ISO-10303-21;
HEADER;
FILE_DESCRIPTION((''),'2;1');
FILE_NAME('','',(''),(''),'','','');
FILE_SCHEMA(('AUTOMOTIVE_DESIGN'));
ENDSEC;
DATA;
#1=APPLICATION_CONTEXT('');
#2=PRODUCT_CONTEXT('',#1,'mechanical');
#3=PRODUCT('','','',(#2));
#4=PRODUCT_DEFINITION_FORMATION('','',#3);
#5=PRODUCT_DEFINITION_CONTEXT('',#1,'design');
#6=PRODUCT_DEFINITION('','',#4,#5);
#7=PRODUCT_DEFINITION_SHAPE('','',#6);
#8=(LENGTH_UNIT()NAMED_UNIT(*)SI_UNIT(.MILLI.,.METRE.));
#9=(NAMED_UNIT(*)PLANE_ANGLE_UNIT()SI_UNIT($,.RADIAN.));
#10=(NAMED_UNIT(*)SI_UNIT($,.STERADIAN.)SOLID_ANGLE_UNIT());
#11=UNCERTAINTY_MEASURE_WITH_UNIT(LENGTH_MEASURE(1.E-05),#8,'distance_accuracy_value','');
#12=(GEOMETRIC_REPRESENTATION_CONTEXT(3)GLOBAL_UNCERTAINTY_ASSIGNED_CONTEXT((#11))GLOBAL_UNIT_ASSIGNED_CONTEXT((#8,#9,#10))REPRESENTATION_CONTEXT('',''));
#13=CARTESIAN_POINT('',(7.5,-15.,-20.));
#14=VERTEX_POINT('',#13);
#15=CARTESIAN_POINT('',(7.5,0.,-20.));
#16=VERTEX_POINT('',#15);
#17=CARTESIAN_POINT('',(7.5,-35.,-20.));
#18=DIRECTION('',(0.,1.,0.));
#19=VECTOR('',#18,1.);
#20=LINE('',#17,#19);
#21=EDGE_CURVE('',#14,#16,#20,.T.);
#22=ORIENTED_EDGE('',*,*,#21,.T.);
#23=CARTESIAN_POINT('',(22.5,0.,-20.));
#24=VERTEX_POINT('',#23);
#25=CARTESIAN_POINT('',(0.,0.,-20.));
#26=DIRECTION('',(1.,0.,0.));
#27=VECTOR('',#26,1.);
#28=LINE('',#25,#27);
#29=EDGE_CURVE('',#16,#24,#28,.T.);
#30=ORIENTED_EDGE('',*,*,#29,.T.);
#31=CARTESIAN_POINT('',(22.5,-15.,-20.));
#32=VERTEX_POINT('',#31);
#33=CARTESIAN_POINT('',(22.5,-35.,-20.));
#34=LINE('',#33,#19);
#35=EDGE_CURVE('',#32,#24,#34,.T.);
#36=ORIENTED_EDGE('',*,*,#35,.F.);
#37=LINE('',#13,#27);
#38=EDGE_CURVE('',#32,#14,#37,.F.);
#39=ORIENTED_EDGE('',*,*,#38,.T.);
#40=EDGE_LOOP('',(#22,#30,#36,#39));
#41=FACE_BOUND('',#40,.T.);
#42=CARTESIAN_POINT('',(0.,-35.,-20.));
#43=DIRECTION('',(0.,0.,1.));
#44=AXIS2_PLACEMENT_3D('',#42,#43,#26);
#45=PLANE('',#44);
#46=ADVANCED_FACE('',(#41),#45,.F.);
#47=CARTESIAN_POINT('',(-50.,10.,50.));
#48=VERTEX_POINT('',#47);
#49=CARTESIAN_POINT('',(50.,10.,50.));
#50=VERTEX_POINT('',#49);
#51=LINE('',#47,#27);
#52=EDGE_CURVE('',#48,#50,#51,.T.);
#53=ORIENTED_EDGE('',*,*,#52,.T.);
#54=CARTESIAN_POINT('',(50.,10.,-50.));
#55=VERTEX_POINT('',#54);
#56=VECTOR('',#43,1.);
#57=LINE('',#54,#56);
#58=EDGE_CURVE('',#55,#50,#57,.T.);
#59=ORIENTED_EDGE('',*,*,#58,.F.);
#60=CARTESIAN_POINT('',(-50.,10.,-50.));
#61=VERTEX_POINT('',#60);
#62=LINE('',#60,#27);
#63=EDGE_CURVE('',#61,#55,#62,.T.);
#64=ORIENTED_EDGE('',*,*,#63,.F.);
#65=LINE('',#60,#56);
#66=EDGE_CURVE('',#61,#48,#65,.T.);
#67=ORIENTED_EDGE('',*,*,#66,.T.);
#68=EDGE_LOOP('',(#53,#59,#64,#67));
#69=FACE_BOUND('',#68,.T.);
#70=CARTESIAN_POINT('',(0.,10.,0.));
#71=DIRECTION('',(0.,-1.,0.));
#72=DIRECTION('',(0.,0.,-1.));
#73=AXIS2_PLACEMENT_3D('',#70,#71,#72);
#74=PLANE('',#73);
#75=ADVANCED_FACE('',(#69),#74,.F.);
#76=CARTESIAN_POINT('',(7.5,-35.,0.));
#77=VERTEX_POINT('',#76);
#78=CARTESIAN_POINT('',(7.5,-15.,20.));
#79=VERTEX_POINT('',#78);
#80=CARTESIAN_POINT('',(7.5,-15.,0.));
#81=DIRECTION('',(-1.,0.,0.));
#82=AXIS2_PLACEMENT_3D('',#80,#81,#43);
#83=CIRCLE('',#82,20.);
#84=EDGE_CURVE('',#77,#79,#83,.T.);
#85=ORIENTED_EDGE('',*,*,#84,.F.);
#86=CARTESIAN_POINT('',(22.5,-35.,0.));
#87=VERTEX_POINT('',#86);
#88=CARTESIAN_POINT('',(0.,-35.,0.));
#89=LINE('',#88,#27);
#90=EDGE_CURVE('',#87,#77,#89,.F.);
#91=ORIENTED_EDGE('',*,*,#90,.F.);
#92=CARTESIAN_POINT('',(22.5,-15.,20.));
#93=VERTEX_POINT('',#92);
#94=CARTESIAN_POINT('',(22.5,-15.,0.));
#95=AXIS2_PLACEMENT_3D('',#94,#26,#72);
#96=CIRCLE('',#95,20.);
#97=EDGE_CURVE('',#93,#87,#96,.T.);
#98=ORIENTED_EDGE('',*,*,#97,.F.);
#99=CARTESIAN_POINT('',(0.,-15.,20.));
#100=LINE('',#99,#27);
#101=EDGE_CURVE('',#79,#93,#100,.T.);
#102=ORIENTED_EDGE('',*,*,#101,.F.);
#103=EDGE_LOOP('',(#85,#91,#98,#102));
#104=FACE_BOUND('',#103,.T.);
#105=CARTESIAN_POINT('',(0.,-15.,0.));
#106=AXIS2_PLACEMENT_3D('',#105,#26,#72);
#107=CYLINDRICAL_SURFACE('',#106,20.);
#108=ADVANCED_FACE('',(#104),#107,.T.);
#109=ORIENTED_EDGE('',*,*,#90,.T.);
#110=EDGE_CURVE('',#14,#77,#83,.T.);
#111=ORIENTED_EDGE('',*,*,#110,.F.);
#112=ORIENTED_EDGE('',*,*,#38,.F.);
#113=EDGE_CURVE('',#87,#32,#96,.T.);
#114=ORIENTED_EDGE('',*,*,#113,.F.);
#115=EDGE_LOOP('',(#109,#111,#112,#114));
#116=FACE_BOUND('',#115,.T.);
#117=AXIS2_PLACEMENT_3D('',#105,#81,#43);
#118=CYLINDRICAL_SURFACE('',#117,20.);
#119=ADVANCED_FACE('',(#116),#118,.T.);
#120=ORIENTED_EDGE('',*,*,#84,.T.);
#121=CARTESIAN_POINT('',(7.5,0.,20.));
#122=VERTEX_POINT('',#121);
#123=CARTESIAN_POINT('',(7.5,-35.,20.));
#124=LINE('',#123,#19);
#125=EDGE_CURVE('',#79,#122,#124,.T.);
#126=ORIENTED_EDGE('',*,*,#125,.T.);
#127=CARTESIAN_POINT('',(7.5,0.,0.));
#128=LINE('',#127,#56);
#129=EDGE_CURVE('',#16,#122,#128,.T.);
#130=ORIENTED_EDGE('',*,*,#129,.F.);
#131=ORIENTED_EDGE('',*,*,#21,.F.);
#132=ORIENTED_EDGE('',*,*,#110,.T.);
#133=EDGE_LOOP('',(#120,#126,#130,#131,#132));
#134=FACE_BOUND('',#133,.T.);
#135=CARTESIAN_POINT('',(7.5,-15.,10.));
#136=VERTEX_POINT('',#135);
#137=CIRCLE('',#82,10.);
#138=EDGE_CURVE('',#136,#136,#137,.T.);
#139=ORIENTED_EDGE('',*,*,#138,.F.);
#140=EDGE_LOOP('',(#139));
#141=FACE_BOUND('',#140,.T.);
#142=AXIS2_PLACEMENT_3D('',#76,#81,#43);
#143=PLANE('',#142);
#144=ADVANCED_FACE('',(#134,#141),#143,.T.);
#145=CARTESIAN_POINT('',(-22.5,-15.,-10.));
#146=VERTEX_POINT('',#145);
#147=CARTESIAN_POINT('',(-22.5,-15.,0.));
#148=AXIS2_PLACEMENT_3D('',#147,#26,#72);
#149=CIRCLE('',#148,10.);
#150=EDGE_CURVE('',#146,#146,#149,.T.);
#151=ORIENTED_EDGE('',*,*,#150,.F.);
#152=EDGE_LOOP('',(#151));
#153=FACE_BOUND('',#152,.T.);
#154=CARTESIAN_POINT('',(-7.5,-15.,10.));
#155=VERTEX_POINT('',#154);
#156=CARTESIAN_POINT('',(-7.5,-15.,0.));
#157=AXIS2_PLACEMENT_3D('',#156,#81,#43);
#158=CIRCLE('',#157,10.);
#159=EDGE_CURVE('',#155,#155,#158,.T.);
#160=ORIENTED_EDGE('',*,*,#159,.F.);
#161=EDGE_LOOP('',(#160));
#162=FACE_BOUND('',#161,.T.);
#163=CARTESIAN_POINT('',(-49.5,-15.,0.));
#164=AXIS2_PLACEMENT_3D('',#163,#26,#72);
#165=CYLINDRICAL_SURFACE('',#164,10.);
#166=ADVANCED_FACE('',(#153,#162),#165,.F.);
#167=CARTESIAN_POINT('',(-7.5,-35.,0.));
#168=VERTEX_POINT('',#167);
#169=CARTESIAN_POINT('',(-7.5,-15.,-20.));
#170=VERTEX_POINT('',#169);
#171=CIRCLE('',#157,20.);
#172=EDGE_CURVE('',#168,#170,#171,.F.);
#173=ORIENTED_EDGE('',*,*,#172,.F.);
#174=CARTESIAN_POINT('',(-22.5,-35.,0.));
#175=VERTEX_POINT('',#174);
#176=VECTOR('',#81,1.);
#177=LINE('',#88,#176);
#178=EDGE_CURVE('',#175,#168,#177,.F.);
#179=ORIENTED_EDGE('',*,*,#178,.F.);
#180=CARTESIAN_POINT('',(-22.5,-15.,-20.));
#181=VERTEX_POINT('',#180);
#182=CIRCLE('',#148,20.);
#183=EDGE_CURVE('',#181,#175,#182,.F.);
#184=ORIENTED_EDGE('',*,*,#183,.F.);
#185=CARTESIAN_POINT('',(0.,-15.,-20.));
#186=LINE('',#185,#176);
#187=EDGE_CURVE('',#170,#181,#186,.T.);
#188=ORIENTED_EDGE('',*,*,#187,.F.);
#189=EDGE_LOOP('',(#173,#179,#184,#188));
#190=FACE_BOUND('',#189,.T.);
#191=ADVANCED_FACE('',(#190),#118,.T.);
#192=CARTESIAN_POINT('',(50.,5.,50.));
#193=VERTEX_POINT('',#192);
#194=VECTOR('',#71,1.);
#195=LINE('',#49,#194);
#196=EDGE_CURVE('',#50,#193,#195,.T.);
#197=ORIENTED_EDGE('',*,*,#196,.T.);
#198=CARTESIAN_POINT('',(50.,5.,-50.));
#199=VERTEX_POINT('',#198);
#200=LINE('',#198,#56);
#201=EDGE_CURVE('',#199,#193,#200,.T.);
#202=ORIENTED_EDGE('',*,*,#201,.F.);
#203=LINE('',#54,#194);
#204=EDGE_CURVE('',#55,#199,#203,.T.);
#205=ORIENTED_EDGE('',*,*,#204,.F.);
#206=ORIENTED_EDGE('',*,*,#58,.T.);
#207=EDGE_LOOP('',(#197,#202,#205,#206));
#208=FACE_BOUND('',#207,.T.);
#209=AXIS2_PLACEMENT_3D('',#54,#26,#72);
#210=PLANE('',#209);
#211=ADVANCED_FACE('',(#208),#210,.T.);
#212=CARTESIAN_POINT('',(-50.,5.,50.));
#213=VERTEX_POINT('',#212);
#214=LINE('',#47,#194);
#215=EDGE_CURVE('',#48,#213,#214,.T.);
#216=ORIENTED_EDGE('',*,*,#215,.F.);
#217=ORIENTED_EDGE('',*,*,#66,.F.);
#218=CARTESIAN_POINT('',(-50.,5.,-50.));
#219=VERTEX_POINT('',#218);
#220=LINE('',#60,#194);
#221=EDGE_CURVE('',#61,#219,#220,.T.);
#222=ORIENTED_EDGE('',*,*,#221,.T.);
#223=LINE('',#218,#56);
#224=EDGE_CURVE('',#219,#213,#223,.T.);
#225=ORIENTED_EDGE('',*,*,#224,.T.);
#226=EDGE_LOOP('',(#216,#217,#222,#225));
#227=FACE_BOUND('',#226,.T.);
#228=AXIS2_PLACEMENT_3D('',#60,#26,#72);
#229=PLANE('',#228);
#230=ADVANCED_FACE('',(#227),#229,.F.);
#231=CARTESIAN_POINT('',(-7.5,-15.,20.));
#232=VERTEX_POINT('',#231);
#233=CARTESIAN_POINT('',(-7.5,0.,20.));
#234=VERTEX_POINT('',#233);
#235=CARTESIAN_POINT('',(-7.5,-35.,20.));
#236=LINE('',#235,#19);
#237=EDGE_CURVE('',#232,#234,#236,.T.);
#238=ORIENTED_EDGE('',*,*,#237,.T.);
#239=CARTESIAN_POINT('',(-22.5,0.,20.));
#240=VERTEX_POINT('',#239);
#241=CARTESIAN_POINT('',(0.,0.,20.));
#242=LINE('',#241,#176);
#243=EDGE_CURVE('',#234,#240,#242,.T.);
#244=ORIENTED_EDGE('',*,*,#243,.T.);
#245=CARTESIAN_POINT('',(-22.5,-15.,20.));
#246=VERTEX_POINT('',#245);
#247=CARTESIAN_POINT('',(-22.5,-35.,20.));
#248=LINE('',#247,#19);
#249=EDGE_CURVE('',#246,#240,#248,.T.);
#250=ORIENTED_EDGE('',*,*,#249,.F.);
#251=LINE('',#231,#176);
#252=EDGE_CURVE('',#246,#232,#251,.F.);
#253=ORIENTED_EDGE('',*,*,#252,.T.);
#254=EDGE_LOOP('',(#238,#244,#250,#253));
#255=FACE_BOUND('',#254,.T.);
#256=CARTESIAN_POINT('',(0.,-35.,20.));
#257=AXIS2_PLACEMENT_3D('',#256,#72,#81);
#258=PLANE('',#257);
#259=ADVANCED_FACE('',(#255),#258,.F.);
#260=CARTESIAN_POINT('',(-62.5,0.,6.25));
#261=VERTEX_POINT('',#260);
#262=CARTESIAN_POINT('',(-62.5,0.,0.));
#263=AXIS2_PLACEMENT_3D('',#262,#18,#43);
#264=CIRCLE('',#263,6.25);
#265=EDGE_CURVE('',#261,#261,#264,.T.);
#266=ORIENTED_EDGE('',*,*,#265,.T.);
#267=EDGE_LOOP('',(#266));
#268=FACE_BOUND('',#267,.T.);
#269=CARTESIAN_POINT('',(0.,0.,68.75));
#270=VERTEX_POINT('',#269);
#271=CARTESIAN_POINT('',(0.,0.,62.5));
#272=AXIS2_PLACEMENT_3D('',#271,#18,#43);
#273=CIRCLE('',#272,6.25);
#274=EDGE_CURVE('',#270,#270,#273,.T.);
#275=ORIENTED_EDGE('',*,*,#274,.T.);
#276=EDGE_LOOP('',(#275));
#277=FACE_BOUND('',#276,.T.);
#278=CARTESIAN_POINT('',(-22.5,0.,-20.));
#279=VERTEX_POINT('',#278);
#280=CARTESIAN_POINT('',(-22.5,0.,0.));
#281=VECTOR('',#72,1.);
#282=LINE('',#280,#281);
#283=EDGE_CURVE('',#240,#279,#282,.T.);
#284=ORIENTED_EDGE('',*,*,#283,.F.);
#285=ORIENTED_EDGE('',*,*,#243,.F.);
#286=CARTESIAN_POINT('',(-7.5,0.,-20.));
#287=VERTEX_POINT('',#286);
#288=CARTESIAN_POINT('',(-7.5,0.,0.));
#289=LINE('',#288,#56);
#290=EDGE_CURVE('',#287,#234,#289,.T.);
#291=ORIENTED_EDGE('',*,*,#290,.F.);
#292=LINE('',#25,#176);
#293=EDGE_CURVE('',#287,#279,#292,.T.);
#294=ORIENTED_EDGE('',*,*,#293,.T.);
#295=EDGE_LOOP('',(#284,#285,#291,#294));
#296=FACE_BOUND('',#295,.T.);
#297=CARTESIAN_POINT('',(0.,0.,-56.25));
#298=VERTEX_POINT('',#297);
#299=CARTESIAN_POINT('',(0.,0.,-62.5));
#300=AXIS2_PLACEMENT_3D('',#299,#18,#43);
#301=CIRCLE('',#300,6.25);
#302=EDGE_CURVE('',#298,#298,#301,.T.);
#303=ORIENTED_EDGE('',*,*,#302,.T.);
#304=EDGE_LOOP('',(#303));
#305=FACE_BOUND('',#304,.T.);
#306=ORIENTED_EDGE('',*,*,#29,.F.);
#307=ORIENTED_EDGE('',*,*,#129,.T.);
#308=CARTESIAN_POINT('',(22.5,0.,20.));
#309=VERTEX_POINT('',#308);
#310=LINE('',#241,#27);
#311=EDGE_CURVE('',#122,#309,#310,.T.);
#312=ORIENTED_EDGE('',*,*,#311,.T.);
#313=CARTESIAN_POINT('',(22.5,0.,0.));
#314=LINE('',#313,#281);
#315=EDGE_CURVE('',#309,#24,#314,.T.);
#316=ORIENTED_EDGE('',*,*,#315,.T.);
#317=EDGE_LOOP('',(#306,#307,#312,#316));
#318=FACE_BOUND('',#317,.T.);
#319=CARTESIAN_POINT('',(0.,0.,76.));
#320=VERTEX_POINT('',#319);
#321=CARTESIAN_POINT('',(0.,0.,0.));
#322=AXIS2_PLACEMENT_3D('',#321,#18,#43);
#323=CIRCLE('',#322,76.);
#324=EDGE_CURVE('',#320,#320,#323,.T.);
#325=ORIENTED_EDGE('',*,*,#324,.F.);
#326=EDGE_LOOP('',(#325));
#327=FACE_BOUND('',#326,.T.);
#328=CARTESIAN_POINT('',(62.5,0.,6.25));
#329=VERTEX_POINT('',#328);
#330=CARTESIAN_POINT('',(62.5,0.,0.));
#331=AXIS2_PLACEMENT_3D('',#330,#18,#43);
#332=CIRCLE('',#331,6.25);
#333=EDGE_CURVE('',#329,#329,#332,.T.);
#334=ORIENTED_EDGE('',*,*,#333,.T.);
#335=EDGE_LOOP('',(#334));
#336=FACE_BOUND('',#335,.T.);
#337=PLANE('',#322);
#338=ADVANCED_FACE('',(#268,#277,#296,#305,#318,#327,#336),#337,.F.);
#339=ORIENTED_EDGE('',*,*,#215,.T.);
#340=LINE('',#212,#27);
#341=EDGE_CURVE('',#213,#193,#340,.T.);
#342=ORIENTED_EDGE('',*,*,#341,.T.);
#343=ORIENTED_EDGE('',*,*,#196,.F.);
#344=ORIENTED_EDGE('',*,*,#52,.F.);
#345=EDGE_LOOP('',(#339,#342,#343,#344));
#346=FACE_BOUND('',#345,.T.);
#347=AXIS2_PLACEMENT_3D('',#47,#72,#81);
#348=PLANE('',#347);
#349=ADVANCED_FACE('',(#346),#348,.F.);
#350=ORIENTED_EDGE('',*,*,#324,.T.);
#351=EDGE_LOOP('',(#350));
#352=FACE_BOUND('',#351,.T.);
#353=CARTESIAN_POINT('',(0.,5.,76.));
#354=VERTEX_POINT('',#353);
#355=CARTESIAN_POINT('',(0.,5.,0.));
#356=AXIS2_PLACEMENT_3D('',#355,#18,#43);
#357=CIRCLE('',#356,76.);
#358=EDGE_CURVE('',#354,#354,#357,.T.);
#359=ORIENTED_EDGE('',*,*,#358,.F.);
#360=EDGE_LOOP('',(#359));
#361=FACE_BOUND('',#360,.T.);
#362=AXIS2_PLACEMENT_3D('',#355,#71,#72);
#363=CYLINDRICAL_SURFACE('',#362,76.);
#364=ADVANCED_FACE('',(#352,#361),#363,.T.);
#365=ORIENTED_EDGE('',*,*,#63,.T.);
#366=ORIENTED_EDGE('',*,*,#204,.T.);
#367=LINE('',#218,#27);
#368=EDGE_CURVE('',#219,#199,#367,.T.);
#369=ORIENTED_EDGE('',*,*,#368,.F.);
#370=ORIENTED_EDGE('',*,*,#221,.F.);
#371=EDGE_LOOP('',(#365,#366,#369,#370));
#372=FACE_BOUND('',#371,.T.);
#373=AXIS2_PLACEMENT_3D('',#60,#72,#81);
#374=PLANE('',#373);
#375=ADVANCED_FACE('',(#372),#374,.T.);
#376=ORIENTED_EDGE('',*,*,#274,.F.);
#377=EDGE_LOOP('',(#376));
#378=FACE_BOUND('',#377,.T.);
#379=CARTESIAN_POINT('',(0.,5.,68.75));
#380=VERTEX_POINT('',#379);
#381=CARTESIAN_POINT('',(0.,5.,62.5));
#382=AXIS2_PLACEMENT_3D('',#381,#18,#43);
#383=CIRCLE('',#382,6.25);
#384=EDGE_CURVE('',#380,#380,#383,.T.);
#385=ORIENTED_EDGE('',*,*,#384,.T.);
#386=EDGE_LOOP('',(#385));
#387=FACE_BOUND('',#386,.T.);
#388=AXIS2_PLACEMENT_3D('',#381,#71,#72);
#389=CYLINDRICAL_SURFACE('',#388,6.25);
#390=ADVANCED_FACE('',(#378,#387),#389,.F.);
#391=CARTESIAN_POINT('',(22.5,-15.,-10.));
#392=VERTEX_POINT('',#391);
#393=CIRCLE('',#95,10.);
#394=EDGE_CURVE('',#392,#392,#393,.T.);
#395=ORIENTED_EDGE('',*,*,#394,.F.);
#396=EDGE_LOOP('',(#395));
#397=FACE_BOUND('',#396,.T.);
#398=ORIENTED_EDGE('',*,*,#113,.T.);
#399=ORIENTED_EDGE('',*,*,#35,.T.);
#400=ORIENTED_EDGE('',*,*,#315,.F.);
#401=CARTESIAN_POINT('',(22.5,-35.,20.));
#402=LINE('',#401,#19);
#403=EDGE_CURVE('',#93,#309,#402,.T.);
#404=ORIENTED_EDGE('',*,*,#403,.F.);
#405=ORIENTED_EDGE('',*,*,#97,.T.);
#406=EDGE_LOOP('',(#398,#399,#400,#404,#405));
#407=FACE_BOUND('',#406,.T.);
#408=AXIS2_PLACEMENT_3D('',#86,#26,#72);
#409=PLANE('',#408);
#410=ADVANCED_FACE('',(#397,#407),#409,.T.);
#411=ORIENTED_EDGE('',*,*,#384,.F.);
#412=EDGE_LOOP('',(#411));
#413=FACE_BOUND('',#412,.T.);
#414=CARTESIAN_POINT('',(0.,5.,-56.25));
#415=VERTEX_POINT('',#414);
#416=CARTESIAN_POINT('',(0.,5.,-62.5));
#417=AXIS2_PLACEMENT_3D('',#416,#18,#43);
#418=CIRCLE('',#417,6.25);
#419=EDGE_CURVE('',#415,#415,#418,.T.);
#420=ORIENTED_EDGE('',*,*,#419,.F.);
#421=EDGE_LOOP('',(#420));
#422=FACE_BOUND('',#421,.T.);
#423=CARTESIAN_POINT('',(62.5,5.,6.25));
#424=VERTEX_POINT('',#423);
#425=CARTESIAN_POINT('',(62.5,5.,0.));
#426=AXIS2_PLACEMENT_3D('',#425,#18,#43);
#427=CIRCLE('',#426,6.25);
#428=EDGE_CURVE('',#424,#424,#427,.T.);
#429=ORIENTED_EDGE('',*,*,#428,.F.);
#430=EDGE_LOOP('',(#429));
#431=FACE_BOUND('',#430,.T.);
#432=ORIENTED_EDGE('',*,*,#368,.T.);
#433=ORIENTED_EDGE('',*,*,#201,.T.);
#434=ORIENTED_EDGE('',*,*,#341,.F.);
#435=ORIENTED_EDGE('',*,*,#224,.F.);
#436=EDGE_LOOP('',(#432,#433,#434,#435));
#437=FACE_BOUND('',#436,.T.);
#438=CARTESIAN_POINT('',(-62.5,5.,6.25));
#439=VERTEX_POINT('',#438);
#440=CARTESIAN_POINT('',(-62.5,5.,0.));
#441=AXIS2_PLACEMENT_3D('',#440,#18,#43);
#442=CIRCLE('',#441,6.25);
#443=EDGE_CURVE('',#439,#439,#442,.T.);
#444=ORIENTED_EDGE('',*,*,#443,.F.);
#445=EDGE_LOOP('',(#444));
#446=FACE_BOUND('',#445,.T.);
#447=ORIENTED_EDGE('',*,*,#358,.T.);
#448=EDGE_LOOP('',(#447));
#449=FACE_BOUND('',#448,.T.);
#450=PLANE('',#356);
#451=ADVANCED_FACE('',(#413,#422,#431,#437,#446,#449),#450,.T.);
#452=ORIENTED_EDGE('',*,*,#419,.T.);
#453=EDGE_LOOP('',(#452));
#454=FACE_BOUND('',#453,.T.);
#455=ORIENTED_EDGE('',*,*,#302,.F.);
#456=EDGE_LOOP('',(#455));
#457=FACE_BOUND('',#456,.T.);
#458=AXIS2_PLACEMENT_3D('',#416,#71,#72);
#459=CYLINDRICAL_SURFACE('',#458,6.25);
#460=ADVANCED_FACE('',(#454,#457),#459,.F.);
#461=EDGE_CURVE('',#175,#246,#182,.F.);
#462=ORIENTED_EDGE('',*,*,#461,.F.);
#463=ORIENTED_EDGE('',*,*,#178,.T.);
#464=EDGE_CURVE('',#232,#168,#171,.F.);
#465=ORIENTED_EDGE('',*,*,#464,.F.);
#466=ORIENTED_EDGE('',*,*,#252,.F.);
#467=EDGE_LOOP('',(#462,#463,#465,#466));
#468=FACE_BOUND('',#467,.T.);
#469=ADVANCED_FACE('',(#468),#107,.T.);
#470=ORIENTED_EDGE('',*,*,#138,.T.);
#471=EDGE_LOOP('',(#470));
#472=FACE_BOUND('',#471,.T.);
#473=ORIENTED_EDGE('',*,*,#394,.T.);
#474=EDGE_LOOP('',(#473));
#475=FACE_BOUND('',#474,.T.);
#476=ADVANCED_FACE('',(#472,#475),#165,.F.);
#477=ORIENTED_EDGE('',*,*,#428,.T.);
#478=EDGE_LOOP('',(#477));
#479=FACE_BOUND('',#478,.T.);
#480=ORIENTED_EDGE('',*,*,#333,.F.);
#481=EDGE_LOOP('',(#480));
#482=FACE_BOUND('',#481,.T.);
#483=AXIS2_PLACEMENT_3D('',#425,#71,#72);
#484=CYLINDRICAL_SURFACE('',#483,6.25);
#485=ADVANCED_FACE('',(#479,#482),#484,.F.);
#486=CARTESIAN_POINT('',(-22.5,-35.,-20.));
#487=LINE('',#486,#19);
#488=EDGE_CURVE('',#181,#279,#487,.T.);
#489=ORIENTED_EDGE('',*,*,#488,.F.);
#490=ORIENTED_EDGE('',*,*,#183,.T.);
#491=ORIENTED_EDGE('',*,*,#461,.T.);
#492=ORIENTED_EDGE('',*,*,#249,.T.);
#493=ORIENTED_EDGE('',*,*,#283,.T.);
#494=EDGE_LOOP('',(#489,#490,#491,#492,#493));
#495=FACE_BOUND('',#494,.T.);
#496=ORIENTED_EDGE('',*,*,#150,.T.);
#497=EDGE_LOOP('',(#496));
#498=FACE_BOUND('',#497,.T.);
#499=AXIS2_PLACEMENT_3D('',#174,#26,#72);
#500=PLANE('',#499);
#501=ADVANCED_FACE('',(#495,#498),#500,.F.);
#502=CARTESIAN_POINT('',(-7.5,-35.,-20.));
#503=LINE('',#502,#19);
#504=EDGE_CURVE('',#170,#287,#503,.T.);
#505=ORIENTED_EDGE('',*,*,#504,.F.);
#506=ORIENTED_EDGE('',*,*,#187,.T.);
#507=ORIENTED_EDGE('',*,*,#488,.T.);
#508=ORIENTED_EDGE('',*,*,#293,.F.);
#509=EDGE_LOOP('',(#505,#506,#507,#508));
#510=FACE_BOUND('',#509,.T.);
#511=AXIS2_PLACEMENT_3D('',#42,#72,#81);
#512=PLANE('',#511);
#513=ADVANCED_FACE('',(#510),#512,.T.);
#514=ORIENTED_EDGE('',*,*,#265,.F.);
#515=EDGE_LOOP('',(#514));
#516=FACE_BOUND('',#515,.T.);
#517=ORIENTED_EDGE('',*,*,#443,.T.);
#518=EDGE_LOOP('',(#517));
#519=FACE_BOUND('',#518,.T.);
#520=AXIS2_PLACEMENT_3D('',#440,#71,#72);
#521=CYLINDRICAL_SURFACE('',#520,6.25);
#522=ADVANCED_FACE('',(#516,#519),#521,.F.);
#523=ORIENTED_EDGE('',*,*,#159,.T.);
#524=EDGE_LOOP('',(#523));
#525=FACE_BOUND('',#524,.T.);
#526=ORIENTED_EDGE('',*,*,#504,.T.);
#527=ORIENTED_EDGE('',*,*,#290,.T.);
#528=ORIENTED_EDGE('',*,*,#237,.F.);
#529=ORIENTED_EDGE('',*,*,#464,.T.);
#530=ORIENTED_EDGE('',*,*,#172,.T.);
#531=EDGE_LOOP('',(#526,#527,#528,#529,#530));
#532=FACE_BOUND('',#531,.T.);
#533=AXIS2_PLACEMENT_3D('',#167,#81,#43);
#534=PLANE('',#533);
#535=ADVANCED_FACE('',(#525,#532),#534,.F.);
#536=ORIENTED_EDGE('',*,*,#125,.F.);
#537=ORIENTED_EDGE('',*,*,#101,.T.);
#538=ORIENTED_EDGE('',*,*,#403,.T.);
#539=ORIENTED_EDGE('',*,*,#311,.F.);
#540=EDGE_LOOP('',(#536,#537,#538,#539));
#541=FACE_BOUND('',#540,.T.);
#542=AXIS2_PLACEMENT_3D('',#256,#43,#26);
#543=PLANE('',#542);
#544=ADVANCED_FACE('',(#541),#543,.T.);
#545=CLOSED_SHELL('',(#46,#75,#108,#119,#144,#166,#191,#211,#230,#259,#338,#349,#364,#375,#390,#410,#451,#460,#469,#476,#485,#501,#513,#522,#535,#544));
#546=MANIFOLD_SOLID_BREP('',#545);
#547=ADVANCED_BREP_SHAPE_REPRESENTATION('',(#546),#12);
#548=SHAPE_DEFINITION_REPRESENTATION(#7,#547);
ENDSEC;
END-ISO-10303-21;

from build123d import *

# Parameters (mm, degrees)
SKETCH1_R           = 76
BOSS_EXTRUDE1_DEPTH = 5
SKETCH1_5_R         = 6.25
CUT_EXTRUDE2_DEPTH  = 5
SKETCH2_W           = 100
SKETCH2_H           = 100
BOSS_EXTRUDE2_DEPTH = 5
SKETCH3_W           = 15
SKETCH3_H           = 40
BOSS_EXTRUDE3_DEPTH = 35
FILLET3_R           = 20
SKETCH5_R           = 10
CUT_EXTRUDE3_DEPTH  = 72


with BuildPart() as part:
    # Sketch1 → Boss-Extrude1 (new body)
    with BuildSketch(Plane(origin=(0, 0, 0), x_dir=(1, 0, 0), z_dir=(0, 1, 0))):
        with Locations(Location((0, 0, 0), (0, 0, 270))):
            Circle(SKETCH1_R)
    extrude(amount=BOSS_EXTRUDE1_DEPTH)

    # Sketch1<5> → Cut-Extrude2 (cut)
    with BuildSketch(Plane(origin=(0, 0, 0), x_dir=(1, 0, 0), z_dir=(0, 1, 0))):
        with Locations(Location((-62.5, 0, 0), (0, 0, 270))):
            Circle(SKETCH1_5_R)
        with Locations(Location((0, 62.5, 0), (0, 0, 270))):
            Circle(SKETCH1_5_R)
        with Locations(Location((62.5, 0, 0), (0, 0, 270))):
            Circle(SKETCH1_5_R)
        with Locations(Location((0, -62.5, 0), (0, 0, 270))):
            Circle(SKETCH1_5_R)
    extrude(amount=CUT_EXTRUDE2_DEPTH, mode=Mode.SUBTRACT)

    # Sketch2 → Boss-Extrude2 (add)
    with BuildSketch(Plane(origin=(0, 5, 0), x_dir=(1, 0, 0), z_dir=(0, 1, 0))):
        Rectangle(SKETCH2_W, SKETCH2_H)
    extrude(amount=BOSS_EXTRUDE2_DEPTH)

    # Sketch3 → Boss-Extrude3 (add)
    with BuildSketch(Plane.XZ):
        with Locations((-15, 0)):
            Rectangle(SKETCH3_W, SKETCH3_H)
        with Locations((15, 0)):
            Rectangle(SKETCH3_W, SKETCH3_H)
    extrude(amount=BOSS_EXTRUDE3_DEPTH)

    # Fillet3
    fillet3_edges = [part.edges().sort_by_distance(p)[0] for p in [
        (15, -35, -20),
        (15, -35, 20),
        (-15, -35, 20),
        (-15, -35, -20),
    ]]
    fillet(fillet3_edges, radius=FILLET3_R - 0.0001)  # a hair under: the kernel refuses the full size

    # Sketch5 → Cut-Extrude3 (cut)
    with BuildSketch(Plane(origin=(22.5, 0, 0), x_dir=(0, 0, -1), z_dir=(1, 0, 0))):
        with Locations((0, -15)):
            Circle(SKETCH5_R)
    extrude(amount=-CUT_EXTRUDE3_DEPTH, mode=Mode.SUBTRACT)


solid = part.part
